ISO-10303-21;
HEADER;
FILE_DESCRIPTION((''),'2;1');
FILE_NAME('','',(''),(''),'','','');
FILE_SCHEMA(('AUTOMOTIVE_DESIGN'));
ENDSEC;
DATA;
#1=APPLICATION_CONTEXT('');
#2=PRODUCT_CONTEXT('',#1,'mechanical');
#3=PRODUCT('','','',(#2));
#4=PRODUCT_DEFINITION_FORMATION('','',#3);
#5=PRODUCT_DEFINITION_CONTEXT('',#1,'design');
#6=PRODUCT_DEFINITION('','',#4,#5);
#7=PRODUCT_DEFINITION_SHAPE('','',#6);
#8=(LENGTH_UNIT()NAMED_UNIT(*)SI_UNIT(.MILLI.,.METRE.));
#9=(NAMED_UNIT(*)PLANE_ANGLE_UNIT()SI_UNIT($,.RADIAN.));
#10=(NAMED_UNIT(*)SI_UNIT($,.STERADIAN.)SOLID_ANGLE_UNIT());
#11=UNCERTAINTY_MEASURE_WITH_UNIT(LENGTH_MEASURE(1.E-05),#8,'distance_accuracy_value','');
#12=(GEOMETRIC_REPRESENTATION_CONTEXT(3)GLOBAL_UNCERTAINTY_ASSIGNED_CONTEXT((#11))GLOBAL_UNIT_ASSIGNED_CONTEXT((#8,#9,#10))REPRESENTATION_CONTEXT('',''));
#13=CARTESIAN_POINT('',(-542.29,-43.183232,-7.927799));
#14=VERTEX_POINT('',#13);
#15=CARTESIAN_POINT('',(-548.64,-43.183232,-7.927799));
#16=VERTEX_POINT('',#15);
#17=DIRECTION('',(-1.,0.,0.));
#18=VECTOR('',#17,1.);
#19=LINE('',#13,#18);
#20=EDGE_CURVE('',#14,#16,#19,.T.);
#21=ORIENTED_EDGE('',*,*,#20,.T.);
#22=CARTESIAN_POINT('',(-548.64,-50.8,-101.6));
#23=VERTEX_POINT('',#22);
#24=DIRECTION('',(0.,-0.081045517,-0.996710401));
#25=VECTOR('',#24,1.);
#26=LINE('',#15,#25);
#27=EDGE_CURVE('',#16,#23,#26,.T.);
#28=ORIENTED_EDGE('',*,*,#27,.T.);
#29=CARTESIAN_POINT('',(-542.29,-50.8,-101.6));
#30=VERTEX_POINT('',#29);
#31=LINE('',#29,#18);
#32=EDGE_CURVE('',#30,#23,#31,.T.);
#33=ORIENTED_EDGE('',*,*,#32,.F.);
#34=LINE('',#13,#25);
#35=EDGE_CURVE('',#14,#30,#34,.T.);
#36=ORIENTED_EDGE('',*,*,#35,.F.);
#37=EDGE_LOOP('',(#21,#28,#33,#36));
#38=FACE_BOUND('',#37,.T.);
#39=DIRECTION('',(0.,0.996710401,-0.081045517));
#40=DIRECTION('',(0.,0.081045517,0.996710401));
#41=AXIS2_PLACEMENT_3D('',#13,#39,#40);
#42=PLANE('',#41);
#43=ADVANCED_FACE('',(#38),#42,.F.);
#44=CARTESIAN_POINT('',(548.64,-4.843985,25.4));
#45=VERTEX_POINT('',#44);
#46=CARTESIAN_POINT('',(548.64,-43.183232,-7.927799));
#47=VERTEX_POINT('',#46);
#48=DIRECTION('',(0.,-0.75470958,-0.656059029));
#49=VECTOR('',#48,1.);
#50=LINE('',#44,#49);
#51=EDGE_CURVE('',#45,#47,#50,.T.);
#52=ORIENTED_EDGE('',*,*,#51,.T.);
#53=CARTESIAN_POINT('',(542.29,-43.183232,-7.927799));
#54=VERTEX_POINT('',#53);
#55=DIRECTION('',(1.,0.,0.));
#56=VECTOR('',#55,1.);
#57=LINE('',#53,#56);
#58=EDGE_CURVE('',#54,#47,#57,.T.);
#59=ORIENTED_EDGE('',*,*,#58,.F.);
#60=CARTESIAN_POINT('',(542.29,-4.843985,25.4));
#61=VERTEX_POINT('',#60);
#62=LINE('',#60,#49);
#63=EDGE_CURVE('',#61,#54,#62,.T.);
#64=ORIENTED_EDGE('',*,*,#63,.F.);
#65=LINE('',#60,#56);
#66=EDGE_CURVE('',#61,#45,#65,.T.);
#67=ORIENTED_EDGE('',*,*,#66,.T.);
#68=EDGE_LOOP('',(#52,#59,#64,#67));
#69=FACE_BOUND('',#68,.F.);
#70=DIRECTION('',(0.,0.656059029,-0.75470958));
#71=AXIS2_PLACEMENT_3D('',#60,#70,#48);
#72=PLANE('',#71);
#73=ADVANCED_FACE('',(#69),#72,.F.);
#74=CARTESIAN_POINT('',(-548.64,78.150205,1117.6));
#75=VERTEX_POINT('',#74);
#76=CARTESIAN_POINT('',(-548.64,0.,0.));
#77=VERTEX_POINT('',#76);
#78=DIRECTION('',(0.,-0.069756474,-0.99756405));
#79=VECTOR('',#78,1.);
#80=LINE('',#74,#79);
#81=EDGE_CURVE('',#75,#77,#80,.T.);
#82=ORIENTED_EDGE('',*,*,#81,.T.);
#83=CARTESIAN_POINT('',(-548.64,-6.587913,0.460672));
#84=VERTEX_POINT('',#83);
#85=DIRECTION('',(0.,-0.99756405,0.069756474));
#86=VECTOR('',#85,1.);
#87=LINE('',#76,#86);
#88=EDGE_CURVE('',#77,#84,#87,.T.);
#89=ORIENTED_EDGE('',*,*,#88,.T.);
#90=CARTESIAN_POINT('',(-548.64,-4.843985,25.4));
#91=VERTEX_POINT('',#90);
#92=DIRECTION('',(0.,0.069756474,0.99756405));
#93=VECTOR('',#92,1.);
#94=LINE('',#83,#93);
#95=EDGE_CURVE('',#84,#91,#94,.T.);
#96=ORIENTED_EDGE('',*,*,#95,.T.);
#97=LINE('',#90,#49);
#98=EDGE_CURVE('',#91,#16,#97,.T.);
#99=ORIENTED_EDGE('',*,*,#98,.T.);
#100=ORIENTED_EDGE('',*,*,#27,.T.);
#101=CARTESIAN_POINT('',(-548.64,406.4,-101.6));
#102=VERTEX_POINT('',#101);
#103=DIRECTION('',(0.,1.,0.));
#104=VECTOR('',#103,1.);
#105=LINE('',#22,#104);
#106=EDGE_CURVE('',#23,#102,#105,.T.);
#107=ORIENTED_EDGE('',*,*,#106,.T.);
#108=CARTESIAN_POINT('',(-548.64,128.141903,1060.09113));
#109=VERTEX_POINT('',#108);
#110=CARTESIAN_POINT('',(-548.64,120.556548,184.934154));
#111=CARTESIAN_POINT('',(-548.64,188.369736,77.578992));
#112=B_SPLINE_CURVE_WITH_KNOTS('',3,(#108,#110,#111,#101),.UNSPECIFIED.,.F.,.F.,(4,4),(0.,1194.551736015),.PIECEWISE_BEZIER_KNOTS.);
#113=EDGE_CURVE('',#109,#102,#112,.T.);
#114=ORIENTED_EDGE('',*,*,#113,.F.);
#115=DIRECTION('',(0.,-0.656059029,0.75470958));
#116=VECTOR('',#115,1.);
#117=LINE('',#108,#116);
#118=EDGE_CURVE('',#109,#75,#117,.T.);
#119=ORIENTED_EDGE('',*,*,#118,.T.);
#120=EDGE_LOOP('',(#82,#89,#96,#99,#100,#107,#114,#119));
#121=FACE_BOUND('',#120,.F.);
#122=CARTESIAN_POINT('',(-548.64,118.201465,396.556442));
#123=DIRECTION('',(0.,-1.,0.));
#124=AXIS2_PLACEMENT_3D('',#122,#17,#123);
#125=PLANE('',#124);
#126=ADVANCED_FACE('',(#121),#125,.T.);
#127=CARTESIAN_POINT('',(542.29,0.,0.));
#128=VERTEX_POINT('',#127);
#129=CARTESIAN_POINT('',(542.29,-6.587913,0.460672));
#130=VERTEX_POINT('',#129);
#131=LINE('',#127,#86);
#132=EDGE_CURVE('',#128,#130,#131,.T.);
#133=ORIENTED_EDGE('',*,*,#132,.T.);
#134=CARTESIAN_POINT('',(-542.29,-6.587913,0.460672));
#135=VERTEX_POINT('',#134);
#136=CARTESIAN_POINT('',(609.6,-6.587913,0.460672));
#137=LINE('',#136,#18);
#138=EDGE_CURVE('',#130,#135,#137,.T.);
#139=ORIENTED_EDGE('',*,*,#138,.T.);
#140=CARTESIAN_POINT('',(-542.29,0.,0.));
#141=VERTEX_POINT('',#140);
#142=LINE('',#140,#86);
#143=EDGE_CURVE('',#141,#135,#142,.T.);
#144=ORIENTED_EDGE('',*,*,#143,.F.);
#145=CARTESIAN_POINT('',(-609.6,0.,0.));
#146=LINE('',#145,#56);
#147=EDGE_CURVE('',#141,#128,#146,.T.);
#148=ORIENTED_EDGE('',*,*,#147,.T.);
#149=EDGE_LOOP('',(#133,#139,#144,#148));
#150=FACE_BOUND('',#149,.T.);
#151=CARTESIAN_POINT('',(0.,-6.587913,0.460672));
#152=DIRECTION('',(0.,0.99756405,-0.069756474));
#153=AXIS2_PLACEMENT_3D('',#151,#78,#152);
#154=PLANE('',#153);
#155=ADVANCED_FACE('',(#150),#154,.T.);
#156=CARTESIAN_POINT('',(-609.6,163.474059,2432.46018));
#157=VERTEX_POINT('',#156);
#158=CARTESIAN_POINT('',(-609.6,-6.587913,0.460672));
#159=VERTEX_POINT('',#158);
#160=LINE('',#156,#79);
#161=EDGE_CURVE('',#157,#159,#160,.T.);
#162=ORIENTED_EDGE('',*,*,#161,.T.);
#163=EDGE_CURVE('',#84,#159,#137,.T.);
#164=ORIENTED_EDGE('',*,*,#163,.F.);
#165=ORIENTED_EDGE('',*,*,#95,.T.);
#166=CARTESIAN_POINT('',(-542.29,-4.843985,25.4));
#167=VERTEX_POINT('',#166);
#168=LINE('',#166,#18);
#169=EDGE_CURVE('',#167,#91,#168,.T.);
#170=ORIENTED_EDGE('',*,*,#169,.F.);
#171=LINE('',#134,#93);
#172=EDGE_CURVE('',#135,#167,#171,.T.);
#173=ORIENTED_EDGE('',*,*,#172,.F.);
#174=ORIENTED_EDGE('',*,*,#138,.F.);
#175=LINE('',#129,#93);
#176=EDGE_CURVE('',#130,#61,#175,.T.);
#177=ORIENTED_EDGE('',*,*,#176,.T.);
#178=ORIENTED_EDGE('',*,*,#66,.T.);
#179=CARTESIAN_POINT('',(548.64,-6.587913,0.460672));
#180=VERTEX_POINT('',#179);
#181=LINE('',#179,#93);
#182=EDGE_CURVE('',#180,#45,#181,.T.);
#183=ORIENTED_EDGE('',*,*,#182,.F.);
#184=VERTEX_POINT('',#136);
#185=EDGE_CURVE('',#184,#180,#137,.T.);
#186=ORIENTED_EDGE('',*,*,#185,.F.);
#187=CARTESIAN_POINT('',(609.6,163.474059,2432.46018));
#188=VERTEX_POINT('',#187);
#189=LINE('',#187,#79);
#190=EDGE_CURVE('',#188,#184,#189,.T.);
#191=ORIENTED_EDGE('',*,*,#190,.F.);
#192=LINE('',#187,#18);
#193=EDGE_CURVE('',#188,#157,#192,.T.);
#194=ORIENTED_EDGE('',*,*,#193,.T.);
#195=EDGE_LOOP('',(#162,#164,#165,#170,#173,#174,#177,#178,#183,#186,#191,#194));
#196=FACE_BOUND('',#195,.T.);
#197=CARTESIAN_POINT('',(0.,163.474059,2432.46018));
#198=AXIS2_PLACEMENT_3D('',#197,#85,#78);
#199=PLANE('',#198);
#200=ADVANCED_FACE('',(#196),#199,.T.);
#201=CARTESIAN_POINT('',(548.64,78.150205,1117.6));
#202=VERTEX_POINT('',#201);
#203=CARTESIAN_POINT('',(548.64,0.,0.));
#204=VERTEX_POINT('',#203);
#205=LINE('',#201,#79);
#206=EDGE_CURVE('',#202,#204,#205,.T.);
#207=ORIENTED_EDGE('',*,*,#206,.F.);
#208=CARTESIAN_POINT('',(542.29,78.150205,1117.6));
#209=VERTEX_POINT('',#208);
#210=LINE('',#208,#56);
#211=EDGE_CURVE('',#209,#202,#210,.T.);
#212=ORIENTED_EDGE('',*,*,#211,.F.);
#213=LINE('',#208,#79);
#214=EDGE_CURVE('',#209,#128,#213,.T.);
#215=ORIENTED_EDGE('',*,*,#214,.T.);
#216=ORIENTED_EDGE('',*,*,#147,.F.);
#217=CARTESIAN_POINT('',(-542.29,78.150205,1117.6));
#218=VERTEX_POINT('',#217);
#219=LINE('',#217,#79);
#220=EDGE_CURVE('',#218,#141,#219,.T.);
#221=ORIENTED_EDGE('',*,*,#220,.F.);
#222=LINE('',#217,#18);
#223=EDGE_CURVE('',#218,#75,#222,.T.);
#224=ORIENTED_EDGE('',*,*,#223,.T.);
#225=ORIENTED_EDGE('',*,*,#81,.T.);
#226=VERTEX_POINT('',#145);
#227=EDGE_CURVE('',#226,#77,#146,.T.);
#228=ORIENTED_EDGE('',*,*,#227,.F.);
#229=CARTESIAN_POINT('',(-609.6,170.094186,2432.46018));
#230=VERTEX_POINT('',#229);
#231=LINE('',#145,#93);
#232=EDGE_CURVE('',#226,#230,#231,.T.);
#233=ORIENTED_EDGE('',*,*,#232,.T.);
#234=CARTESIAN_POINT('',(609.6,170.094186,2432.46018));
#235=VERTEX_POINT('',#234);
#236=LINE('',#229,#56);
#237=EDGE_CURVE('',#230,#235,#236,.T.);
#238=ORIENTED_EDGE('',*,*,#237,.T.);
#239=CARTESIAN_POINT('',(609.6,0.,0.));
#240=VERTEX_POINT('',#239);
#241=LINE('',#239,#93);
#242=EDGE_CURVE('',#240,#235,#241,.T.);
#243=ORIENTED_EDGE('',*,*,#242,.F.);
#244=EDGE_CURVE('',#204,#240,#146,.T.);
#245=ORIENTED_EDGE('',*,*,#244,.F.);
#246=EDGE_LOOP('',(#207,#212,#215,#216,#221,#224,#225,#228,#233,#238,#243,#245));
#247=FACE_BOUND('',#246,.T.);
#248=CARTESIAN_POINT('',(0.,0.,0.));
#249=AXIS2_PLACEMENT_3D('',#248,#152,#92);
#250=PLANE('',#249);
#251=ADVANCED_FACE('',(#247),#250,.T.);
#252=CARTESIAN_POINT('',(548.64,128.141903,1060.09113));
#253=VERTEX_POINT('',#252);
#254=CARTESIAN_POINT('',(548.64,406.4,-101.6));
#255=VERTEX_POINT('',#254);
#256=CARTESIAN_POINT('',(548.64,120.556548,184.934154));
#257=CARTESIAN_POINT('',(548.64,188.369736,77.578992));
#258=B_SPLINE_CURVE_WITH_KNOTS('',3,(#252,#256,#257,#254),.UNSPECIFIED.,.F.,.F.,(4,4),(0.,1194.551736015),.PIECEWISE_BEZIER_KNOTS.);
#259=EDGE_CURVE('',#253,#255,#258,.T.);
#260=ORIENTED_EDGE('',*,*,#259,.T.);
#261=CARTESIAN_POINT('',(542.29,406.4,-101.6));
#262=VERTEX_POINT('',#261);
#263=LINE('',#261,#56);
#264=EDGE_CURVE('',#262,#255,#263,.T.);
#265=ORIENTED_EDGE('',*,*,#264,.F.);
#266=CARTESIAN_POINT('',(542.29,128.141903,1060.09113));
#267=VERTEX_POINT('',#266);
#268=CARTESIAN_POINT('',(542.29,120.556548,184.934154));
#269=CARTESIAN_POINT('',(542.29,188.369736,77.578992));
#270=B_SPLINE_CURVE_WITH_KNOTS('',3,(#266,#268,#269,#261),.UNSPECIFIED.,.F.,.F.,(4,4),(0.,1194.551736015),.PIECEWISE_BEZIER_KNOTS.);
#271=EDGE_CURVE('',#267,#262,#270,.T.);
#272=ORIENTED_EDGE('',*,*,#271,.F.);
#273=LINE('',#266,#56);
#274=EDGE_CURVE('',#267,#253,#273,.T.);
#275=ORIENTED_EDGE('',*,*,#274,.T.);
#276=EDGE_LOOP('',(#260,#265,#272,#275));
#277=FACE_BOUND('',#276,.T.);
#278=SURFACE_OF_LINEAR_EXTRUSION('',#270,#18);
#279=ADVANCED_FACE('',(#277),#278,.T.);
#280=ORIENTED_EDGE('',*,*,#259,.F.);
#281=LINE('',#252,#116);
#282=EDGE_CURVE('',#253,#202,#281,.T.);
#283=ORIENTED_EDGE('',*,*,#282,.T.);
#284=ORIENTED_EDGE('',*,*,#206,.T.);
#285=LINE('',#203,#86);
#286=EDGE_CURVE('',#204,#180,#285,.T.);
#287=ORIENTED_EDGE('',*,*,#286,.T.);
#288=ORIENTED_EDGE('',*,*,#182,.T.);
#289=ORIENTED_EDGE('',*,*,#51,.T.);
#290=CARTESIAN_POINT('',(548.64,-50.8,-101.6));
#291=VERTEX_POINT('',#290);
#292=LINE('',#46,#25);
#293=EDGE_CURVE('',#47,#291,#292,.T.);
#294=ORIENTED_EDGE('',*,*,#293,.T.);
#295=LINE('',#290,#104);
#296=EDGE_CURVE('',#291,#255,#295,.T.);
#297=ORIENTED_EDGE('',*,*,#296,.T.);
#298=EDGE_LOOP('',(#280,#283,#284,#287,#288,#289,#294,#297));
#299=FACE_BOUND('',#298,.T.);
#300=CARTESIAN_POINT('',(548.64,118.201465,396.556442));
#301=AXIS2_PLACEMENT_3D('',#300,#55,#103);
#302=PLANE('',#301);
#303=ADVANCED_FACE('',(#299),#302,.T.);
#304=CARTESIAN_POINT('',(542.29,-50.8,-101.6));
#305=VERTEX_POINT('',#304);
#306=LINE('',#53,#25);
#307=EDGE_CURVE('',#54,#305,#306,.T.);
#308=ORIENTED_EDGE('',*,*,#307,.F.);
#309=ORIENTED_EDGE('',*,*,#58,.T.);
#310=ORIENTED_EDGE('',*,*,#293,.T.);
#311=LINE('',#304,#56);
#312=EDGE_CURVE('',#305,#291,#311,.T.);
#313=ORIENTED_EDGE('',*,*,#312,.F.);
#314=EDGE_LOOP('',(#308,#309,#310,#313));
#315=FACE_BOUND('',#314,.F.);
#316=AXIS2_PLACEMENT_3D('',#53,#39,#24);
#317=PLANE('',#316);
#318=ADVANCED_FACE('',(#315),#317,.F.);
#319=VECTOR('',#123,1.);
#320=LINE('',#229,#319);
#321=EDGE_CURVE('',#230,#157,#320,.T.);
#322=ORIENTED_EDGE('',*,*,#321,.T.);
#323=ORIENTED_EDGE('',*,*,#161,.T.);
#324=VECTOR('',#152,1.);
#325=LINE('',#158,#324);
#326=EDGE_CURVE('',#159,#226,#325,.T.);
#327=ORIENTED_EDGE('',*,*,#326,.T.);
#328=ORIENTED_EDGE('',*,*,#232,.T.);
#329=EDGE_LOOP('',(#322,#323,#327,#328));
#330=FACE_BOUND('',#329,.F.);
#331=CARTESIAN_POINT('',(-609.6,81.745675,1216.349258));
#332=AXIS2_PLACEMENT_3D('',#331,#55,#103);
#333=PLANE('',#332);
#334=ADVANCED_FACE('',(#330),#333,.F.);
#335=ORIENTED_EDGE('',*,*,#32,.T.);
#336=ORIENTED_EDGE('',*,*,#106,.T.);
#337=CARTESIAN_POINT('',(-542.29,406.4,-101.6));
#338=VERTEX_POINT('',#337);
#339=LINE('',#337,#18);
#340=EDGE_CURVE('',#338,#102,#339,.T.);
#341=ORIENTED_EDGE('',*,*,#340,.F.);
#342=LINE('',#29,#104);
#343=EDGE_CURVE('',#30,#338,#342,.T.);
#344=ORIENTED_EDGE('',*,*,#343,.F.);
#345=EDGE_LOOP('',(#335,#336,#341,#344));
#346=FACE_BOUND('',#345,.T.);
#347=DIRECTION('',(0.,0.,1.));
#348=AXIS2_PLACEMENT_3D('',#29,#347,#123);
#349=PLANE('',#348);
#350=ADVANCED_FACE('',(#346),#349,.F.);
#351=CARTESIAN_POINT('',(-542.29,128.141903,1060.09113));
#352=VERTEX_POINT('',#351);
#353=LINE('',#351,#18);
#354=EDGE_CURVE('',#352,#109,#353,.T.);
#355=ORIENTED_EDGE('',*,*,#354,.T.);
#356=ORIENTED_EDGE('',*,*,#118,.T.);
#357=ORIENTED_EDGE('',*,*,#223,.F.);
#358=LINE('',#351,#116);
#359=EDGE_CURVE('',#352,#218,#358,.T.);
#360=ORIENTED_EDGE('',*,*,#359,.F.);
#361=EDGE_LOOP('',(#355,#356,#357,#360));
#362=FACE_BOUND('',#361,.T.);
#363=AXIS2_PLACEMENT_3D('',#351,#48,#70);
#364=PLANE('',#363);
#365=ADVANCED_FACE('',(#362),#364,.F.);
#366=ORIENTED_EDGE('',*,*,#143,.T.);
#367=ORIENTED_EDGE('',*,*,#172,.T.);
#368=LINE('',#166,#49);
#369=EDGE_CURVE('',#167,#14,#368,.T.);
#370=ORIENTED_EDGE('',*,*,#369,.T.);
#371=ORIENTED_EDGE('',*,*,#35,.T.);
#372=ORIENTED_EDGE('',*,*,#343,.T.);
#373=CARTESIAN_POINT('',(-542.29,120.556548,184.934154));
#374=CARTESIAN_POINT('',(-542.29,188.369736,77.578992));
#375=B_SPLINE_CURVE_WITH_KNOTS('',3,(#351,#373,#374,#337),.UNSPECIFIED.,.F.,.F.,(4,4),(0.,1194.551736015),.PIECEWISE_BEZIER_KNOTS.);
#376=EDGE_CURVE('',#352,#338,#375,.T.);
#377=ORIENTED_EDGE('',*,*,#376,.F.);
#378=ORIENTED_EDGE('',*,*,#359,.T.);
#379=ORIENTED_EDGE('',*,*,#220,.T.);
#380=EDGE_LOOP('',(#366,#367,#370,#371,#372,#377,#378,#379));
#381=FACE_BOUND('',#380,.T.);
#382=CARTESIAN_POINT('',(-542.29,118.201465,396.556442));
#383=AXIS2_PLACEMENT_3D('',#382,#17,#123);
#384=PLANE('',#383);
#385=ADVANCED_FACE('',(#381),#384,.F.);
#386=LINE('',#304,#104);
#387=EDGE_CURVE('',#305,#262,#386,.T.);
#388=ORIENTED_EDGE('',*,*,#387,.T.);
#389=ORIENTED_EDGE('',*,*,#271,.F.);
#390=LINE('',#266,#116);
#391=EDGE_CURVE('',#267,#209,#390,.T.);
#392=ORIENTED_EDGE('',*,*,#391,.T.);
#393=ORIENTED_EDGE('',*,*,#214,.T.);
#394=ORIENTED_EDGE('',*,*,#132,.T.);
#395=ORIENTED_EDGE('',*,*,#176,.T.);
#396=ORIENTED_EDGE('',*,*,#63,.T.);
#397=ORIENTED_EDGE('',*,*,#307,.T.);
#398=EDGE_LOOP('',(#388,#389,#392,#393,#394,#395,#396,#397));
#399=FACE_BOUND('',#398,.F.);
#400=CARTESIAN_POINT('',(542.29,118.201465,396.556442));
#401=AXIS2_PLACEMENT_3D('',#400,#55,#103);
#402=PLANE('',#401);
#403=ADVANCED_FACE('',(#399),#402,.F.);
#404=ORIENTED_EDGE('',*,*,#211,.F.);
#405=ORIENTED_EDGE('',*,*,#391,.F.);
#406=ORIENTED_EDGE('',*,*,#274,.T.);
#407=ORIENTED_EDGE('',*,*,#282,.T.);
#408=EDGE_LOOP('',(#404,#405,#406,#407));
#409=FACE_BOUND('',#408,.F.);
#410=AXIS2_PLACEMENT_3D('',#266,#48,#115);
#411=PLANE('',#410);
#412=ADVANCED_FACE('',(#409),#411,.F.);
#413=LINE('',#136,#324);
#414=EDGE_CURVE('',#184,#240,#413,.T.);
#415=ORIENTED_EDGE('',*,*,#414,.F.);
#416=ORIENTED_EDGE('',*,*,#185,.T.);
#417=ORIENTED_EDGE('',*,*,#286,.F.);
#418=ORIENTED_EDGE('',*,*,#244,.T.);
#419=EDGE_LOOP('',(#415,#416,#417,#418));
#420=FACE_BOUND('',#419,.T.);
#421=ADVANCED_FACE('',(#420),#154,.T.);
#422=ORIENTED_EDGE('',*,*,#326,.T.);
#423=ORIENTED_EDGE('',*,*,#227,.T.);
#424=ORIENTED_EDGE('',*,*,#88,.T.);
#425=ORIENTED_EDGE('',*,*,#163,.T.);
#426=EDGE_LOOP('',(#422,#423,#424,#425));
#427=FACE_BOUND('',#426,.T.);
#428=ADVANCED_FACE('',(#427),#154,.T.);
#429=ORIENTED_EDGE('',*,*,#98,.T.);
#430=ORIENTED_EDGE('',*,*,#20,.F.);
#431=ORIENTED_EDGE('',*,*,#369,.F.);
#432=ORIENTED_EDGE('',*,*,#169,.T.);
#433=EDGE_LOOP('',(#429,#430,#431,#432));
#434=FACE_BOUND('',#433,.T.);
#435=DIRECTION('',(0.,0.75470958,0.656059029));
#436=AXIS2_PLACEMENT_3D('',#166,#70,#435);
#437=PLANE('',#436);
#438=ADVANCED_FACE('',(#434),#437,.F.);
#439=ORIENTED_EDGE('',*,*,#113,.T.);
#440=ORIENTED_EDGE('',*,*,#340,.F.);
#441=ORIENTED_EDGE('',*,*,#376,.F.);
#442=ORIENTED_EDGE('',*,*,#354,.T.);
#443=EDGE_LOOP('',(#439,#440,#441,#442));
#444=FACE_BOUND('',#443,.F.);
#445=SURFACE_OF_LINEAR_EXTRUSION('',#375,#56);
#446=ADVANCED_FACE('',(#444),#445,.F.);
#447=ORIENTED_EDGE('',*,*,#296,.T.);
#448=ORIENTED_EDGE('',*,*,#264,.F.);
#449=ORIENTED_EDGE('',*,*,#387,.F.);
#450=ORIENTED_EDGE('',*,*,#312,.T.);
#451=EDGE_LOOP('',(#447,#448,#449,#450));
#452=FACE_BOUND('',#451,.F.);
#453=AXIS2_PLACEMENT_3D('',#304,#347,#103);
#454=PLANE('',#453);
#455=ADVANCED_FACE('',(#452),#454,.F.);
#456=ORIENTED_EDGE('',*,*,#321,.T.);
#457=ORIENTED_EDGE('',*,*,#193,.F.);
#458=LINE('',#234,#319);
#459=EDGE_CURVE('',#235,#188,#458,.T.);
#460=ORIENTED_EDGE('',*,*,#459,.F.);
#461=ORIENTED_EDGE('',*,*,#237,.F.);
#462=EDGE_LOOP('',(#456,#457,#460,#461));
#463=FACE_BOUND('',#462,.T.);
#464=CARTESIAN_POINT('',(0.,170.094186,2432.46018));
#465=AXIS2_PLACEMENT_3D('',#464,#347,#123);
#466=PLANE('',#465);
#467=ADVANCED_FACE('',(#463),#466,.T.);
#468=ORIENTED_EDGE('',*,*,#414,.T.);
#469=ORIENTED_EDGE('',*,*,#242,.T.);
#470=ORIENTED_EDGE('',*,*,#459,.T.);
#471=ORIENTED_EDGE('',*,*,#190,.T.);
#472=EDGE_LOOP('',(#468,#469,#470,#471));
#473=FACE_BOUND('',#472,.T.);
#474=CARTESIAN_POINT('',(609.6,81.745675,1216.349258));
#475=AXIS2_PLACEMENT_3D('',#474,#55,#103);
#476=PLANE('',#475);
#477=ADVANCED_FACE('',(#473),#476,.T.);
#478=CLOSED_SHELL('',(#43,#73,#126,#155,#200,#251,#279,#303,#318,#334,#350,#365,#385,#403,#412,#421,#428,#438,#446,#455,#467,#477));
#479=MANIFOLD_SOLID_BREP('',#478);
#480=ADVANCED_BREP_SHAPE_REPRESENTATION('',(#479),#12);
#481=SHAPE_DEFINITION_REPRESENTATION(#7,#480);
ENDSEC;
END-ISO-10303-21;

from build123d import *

# Parameters (mm, degrees)
F2_DEPTH = 609.6
F3_START = 542.29
F3_DEPTH = 6.35


# Not quite as in the source:
# - a length typed as a fraction of an inch, garbled in the dataset ("3 / 203.2 mm" for 3/8 in), is restored


with BuildPart() as f2:
    # F0 (on Right) → F2 (new body, symmetric)
    with BuildSketch(Plane.YZ):
        Polygon((-6.5879129879, 0.4606717526), (0, 0), (170.0941855777, 2432.4601801536), (163.4740592827, 2432.4601801536), align=None)
    extrude(amount=F2_DEPTH, both=True)

    # F1 (on Right) → F3 (join)
    with BuildSketch(Plane.YZ.offset(F3_START)):
        with BuildLine():
            Line((-43.1832319469, -7.9277986727), (-50.8, -101.6))
            Line((-50.8, -101.6), (406.4, -101.6))
            add(Edge.make_bspline(
                [(128.1419030371, 1060.091129987), (120.5565482378, 184.9341541529), (188.3697360754, 77.5789916515), (406.4, -101.6)],
                knots=[0, 0, 0, 0, 1194.5517360148, 1194.5517360148, 1194.5517360148, 1194.5517360148], degree=3))
            Line((128.1419030371, 1060.091129987), (78.1502050281, 1117.6))
            Line((78.1502050281, 1117.6), (0, 0))
            Line((0, 0), (-6.5879129879, 0.4606717526))
            Line((-6.5879129879, 0.4606717526), (-4.8439852716, 25.4))
            Line((-4.8439852716, 25.4), (-43.1832319469, -7.9277986727))
        make_face()
    extrude(amount=F3_DEPTH)

    # F4: F2 across plane


with BuildPart() as f2_1:
    add(f2.part)
    add(f2.part.mirror(Plane.YZ))


solid = f2_1.part
